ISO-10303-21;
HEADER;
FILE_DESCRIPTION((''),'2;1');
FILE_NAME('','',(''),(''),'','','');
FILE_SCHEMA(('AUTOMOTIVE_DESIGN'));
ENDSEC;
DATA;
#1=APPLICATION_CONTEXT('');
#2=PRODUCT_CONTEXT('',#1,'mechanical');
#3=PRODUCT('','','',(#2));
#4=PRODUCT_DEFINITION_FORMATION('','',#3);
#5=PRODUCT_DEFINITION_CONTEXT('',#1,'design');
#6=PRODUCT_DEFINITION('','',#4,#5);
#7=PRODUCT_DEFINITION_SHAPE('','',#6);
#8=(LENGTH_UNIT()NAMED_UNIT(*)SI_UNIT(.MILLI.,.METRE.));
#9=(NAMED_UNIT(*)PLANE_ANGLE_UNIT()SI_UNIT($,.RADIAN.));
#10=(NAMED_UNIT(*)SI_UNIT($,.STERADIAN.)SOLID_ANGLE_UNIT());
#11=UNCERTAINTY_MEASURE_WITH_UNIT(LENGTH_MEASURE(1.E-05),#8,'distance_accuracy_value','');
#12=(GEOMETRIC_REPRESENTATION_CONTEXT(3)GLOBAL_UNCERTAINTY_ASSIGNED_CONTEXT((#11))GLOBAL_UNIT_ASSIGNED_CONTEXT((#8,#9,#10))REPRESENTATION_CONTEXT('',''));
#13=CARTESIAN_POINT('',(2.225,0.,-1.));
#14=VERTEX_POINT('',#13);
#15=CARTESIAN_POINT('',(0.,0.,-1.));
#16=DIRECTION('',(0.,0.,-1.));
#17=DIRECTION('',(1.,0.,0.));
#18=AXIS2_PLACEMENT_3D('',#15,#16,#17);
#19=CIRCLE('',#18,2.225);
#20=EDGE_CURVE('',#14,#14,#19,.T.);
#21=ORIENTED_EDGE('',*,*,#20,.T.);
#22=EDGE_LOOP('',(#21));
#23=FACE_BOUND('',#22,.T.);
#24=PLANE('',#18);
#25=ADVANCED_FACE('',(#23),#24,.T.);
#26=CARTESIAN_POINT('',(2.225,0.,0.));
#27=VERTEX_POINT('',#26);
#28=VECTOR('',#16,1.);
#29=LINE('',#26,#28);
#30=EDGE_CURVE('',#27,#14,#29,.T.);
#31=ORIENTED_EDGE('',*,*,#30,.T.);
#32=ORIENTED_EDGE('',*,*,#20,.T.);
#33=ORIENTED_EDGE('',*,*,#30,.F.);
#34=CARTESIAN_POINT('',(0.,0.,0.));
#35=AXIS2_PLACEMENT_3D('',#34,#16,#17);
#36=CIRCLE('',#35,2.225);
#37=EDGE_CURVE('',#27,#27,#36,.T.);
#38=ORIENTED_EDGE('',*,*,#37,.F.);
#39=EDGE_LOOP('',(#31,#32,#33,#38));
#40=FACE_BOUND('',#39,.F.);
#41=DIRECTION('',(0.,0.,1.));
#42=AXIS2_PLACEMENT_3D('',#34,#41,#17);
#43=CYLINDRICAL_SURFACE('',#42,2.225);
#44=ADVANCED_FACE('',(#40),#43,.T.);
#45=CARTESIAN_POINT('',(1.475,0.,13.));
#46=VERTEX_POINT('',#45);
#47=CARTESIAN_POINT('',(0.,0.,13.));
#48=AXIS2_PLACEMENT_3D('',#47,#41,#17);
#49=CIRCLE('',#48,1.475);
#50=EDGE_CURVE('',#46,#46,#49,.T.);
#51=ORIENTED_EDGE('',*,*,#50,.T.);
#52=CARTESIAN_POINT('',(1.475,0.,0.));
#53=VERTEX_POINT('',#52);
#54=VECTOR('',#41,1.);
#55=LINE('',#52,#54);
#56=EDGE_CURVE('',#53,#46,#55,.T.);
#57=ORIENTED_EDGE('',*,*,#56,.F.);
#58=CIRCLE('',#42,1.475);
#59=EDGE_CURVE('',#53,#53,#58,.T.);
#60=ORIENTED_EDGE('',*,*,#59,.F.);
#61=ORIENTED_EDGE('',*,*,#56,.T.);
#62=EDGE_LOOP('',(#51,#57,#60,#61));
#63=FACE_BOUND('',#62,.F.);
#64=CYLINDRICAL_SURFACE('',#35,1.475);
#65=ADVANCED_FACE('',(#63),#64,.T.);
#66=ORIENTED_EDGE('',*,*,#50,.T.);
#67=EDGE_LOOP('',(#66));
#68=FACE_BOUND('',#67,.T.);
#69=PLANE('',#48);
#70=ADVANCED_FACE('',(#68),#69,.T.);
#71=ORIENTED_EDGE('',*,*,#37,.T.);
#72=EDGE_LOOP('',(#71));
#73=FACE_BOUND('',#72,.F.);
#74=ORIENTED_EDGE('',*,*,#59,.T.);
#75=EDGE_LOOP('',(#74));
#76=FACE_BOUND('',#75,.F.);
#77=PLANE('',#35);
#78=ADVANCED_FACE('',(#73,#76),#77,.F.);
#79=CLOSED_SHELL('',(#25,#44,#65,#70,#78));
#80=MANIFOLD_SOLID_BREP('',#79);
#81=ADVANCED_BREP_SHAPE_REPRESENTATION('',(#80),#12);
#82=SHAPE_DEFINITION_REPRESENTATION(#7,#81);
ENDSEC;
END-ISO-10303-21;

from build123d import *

# Parameters (mm, degrees)
F0_R     = 1.475
F1_DEPTH = 13
F2_R     = 2.225
F2_R_2   = 1.475
F3_DEPTH = 1


with BuildPart() as f1:
    # F0 (on Top) → F1 (new body)
    with BuildSketch(Plane.XY):
        Circle(F0_R)
    extrude(amount=F1_DEPTH)

    # F2 (on face) → F3 (join)
    with BuildSketch(Plane(origin=(0, 0, 0), x_dir=(1, 0, 0), z_dir=(0, 0, -1))):
        Circle(F2_R)
        Circle(F2_R_2, mode=Mode.SUBTRACT)
        Circle(F2_R_2)
    extrude(amount=F3_DEPTH)


solid = f1.part
